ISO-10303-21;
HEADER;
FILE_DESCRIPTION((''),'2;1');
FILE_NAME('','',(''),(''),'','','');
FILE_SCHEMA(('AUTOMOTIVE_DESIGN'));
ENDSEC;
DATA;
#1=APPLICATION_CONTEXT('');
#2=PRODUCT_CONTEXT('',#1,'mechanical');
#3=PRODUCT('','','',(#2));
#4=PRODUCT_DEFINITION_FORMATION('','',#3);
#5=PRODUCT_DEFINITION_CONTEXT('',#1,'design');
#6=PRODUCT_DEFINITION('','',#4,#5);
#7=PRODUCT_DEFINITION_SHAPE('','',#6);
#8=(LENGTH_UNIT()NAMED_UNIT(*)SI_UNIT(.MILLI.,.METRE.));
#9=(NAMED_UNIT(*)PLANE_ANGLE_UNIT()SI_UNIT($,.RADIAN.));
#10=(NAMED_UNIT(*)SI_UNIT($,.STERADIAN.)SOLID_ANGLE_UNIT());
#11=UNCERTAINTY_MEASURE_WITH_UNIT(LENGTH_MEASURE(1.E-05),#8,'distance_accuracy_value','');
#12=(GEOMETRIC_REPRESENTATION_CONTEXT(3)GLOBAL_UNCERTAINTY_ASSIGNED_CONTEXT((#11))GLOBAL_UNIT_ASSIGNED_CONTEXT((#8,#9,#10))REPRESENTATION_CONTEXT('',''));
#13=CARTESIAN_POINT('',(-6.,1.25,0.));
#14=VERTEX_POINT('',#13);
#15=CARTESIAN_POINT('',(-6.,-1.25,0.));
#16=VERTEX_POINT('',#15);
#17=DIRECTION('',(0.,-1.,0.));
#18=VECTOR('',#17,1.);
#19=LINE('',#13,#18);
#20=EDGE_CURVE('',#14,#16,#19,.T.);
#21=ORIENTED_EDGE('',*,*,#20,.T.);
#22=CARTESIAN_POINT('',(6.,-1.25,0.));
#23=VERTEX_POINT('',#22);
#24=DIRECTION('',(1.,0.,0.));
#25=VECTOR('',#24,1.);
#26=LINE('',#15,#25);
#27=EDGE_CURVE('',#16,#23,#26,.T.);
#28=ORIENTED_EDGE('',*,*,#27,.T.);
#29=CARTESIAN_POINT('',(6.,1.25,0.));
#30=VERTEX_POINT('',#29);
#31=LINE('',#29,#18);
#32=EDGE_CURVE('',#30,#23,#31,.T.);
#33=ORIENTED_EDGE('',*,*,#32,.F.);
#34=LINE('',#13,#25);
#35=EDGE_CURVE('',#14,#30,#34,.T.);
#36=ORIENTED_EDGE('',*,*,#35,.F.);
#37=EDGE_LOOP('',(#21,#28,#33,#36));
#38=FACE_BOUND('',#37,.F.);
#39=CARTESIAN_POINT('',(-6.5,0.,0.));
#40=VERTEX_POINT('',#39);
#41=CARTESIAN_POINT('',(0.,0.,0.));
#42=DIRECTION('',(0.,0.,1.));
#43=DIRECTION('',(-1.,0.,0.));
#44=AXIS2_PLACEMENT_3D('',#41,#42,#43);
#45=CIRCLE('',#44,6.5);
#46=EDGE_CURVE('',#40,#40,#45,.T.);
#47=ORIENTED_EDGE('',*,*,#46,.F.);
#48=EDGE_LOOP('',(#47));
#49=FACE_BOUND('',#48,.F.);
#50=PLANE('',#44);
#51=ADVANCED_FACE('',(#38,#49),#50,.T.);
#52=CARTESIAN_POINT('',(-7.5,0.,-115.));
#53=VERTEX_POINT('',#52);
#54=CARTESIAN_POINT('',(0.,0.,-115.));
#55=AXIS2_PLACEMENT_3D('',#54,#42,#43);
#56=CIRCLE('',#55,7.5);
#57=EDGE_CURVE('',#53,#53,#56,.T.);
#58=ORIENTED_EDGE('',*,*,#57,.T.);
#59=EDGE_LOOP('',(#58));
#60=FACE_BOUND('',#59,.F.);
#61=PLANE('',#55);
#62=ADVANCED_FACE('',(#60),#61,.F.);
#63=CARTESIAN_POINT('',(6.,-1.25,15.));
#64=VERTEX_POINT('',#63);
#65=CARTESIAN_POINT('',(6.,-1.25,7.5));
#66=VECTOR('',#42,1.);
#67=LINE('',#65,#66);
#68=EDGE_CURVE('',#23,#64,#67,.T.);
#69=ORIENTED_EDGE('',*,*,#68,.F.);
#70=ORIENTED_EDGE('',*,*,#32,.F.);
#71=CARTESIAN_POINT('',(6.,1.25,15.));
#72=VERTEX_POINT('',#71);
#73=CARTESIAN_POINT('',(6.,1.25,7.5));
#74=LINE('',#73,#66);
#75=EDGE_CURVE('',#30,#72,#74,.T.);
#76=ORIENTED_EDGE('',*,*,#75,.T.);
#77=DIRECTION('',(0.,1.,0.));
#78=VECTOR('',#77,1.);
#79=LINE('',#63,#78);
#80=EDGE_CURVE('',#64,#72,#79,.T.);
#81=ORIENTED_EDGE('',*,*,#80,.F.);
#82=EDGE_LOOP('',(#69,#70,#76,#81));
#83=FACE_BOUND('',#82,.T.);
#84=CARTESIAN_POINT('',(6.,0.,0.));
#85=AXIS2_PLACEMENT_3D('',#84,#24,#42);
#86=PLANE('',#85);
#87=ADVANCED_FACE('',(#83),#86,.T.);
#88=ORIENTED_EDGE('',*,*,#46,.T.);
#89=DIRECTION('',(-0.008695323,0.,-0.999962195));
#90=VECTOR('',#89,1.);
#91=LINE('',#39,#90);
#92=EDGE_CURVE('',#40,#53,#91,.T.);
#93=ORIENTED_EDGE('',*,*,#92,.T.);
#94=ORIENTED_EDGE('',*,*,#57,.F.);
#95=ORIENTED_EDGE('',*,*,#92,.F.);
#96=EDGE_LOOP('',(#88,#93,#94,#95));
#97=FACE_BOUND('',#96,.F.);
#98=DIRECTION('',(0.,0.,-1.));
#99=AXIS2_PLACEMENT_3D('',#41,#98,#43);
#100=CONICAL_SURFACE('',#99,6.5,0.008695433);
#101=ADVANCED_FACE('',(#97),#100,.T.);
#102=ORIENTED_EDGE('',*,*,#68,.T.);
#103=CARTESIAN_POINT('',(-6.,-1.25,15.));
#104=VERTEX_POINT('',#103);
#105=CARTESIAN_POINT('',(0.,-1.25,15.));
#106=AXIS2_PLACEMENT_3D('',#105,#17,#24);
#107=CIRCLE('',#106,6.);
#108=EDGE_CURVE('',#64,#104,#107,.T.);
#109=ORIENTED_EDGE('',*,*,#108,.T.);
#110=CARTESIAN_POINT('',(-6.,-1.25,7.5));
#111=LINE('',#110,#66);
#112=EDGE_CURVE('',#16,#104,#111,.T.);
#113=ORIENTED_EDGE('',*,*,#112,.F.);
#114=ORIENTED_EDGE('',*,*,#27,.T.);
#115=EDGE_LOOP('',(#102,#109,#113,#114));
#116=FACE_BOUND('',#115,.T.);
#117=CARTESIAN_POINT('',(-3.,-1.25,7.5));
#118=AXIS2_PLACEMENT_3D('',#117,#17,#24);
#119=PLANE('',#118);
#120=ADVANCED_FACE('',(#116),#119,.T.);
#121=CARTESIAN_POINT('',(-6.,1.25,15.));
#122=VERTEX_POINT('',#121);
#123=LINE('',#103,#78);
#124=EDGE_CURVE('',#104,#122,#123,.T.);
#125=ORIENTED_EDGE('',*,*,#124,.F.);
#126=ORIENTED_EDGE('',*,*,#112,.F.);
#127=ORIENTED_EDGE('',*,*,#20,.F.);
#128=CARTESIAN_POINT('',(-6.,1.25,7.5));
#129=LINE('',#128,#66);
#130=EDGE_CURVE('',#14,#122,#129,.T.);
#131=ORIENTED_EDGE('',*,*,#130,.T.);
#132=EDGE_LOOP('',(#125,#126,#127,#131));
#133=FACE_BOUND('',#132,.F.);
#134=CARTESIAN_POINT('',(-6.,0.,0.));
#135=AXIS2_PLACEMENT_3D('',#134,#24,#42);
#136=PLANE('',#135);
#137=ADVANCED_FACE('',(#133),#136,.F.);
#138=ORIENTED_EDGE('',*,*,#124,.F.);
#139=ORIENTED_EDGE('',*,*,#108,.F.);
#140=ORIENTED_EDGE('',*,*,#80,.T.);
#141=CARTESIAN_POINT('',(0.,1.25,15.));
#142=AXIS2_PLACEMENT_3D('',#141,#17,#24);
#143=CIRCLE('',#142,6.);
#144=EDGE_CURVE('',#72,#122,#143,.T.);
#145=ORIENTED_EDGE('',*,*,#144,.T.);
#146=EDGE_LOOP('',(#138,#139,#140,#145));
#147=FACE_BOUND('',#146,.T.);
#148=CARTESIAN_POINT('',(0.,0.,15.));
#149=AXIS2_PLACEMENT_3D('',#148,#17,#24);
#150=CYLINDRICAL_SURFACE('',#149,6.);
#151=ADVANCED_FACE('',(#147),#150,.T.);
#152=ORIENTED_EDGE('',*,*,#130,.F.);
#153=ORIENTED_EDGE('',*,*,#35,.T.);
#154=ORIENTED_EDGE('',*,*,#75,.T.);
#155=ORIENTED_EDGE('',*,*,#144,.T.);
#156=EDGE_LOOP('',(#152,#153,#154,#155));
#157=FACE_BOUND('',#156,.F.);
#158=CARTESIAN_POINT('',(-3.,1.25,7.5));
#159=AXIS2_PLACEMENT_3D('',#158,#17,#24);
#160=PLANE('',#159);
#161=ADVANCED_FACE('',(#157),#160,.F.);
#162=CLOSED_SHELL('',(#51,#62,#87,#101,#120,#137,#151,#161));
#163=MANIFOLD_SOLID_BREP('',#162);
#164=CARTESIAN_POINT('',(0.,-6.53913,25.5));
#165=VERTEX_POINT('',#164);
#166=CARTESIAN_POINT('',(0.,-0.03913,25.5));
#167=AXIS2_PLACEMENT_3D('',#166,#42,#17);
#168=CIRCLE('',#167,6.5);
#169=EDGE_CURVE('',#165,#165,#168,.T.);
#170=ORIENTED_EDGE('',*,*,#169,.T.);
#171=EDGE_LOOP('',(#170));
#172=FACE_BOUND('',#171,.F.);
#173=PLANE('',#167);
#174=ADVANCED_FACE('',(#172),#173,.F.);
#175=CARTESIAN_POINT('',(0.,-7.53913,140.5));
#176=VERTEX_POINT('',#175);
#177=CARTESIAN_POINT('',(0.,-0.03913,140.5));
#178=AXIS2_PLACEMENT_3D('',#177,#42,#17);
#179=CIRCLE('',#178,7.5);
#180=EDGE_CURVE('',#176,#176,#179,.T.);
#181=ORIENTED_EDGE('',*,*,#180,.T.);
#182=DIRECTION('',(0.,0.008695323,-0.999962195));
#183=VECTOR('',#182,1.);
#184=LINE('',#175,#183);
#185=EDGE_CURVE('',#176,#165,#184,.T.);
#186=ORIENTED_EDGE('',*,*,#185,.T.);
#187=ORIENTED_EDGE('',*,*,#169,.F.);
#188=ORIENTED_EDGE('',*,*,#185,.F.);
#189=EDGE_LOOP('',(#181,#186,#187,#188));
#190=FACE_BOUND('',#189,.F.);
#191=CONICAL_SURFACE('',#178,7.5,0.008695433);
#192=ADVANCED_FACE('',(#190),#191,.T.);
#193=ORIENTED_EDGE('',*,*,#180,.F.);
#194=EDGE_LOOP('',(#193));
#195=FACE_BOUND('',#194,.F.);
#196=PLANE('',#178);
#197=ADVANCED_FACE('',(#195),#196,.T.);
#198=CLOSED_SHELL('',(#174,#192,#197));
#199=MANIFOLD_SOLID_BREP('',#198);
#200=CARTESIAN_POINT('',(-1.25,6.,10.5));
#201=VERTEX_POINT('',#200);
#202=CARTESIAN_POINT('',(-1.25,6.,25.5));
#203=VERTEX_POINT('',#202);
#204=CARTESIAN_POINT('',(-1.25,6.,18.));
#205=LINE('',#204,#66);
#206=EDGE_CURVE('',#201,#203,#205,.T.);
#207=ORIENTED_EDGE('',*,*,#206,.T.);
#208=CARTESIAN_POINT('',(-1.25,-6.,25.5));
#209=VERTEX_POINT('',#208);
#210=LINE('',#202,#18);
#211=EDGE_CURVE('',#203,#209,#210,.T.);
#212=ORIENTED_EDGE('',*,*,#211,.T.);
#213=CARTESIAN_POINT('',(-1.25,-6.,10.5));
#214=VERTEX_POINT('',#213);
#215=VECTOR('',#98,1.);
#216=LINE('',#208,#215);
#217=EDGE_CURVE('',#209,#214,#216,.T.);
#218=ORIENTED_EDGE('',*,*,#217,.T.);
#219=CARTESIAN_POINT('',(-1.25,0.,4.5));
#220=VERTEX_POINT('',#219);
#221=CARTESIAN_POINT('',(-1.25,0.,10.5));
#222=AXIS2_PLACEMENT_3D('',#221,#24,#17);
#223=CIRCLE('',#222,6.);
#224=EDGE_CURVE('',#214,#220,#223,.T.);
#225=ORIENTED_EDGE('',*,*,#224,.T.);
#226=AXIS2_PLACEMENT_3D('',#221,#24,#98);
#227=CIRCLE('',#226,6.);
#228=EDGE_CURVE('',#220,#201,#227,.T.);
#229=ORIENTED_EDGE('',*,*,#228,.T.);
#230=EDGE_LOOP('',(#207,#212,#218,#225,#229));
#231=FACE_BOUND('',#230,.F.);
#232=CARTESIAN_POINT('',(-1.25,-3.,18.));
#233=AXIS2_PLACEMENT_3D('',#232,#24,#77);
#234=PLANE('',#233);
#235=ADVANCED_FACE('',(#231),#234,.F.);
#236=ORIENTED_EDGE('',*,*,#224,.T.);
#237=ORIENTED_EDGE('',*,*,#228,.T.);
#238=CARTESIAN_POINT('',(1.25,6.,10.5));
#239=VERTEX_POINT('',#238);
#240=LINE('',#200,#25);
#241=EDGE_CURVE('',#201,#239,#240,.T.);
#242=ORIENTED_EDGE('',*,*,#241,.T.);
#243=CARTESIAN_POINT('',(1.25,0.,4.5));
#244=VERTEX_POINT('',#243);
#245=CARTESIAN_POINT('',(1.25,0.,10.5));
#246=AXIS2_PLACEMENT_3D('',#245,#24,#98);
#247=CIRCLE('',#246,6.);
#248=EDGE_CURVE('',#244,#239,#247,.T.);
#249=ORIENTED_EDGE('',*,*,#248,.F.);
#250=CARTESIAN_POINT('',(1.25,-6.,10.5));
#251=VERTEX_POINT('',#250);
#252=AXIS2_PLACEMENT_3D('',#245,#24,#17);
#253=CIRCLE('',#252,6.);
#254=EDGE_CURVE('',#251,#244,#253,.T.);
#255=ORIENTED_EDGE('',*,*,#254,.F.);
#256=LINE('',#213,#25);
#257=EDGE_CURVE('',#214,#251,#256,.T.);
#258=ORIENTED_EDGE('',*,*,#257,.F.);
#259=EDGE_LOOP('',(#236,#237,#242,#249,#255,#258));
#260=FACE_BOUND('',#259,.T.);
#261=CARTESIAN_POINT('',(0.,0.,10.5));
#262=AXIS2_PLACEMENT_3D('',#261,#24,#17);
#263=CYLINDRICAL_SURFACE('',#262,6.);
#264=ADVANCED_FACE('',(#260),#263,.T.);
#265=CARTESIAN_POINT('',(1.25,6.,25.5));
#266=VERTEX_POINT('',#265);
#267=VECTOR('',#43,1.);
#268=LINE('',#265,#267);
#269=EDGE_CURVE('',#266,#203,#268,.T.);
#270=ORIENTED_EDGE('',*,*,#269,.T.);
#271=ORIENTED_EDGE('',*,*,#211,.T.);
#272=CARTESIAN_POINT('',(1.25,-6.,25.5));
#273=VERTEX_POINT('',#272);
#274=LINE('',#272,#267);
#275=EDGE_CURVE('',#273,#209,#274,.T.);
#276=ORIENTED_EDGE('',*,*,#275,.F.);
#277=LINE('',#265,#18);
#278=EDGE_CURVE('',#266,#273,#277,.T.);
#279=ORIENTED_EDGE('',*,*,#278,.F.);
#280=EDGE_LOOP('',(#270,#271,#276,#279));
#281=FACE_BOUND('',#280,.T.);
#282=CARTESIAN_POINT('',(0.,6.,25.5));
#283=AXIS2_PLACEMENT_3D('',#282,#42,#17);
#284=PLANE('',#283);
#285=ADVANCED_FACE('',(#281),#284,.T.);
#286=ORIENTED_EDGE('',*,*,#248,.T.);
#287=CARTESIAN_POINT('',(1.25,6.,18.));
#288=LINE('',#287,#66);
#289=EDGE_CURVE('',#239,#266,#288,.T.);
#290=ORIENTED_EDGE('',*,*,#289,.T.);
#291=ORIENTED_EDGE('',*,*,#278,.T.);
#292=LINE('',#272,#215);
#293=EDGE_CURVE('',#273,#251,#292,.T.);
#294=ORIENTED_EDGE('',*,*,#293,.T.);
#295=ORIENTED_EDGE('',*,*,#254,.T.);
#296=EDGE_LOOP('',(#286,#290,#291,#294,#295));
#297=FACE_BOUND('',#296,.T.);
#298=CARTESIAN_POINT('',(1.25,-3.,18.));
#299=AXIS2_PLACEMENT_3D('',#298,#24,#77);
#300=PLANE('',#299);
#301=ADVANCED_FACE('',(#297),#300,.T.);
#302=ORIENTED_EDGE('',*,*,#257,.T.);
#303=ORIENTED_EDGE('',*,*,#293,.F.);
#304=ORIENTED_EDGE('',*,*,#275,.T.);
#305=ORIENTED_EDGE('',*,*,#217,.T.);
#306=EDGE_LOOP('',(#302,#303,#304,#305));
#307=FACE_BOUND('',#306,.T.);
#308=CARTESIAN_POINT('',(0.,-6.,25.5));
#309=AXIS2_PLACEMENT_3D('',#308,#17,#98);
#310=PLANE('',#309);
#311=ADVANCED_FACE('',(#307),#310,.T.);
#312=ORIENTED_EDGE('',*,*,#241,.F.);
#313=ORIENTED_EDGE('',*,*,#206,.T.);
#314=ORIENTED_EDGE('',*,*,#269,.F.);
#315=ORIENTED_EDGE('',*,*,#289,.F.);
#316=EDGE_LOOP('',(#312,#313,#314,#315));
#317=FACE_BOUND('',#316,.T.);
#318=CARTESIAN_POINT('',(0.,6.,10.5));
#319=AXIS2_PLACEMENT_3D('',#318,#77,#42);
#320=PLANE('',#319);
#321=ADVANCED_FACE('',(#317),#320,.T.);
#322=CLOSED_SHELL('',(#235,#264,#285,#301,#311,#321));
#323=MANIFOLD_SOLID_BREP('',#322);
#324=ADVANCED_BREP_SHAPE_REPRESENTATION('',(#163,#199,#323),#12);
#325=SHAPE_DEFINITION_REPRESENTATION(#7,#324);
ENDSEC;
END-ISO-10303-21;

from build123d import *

# Parameters (mm, degrees)
F0_W     = 6
F0_H     = 15
F2_DEPTH = 1.25
F3_W     = 6
F3_H     = 15
F5_DEPTH = 1.25


# Not quite as in the source:
# - a feature names something its author has since deleted; it is built from what else it names


with BuildPart() as f1:
    # F0 (on Front) → F1 (revolve)
    with BuildSketch(Plane.XZ):
        Polygon((0, -115), (0, 0), (-6, 0), (-6.5, 0), (-7.5, -115), align=None)
    revolve(axis=Axis((0, 0, -57.5), (0, 0, 1)))

    # F0 (on Front) → F2 (join, symmetric)
    with BuildSketch(Plane.XZ):
        with Locations((-3, 7.5)):
            Rectangle(F0_W, F0_H)
        with Locations((3, 7.5)):
            Rectangle(F0_W, F0_H)
        with BuildLine():
            Line((-6, 15), (0, 15))
            Line((0, 15), (6, 15))
            ThreePointArc((6, 15), (0, 21), (-6, 15))
        make_face()
    extrude(amount=F2_DEPTH, both=True)


with BuildPart() as f4:
    # F3 (on Right) → F4 (revolve)
    with BuildSketch(Plane.YZ):
        Polygon((-6, 25.5), (-0.0391304348, 25.5), (-0.0391304348, 140.5), (-7.5391304348, 140.5), (-6.5391304348, 25.5), align=None)
    revolve(axis=Axis((0, -0.0391304348, 83), (0, 0, 1)))


with BuildPart() as f5:
    # F3 (on Right) → F5 (new body, symmetric)
    with BuildSketch(Plane.YZ):
        Polygon((0, 10.5), (0, 25.5), (-0.0391304348, 25.5), (-6, 25.5), (-6, 10.5), align=None)
        with Locations((3, 18)):
            Rectangle(F3_W, F3_H)
        with BuildLine():
            Line((6, 10.5), (0, 10.5))
            Line((0, 10.5), (-6, 10.5))
            ThreePointArc((-6, 10.5), (-4.2426406871, 6.2573593129), (0, 4.5))
            ThreePointArc((0, 4.5), (4.2426406871, 6.2573593129), (6, 10.5))
        make_face()
    extrude(amount=F5_DEPTH, both=True)


solid = Compound([f1.part, f4.part, f5.part])
